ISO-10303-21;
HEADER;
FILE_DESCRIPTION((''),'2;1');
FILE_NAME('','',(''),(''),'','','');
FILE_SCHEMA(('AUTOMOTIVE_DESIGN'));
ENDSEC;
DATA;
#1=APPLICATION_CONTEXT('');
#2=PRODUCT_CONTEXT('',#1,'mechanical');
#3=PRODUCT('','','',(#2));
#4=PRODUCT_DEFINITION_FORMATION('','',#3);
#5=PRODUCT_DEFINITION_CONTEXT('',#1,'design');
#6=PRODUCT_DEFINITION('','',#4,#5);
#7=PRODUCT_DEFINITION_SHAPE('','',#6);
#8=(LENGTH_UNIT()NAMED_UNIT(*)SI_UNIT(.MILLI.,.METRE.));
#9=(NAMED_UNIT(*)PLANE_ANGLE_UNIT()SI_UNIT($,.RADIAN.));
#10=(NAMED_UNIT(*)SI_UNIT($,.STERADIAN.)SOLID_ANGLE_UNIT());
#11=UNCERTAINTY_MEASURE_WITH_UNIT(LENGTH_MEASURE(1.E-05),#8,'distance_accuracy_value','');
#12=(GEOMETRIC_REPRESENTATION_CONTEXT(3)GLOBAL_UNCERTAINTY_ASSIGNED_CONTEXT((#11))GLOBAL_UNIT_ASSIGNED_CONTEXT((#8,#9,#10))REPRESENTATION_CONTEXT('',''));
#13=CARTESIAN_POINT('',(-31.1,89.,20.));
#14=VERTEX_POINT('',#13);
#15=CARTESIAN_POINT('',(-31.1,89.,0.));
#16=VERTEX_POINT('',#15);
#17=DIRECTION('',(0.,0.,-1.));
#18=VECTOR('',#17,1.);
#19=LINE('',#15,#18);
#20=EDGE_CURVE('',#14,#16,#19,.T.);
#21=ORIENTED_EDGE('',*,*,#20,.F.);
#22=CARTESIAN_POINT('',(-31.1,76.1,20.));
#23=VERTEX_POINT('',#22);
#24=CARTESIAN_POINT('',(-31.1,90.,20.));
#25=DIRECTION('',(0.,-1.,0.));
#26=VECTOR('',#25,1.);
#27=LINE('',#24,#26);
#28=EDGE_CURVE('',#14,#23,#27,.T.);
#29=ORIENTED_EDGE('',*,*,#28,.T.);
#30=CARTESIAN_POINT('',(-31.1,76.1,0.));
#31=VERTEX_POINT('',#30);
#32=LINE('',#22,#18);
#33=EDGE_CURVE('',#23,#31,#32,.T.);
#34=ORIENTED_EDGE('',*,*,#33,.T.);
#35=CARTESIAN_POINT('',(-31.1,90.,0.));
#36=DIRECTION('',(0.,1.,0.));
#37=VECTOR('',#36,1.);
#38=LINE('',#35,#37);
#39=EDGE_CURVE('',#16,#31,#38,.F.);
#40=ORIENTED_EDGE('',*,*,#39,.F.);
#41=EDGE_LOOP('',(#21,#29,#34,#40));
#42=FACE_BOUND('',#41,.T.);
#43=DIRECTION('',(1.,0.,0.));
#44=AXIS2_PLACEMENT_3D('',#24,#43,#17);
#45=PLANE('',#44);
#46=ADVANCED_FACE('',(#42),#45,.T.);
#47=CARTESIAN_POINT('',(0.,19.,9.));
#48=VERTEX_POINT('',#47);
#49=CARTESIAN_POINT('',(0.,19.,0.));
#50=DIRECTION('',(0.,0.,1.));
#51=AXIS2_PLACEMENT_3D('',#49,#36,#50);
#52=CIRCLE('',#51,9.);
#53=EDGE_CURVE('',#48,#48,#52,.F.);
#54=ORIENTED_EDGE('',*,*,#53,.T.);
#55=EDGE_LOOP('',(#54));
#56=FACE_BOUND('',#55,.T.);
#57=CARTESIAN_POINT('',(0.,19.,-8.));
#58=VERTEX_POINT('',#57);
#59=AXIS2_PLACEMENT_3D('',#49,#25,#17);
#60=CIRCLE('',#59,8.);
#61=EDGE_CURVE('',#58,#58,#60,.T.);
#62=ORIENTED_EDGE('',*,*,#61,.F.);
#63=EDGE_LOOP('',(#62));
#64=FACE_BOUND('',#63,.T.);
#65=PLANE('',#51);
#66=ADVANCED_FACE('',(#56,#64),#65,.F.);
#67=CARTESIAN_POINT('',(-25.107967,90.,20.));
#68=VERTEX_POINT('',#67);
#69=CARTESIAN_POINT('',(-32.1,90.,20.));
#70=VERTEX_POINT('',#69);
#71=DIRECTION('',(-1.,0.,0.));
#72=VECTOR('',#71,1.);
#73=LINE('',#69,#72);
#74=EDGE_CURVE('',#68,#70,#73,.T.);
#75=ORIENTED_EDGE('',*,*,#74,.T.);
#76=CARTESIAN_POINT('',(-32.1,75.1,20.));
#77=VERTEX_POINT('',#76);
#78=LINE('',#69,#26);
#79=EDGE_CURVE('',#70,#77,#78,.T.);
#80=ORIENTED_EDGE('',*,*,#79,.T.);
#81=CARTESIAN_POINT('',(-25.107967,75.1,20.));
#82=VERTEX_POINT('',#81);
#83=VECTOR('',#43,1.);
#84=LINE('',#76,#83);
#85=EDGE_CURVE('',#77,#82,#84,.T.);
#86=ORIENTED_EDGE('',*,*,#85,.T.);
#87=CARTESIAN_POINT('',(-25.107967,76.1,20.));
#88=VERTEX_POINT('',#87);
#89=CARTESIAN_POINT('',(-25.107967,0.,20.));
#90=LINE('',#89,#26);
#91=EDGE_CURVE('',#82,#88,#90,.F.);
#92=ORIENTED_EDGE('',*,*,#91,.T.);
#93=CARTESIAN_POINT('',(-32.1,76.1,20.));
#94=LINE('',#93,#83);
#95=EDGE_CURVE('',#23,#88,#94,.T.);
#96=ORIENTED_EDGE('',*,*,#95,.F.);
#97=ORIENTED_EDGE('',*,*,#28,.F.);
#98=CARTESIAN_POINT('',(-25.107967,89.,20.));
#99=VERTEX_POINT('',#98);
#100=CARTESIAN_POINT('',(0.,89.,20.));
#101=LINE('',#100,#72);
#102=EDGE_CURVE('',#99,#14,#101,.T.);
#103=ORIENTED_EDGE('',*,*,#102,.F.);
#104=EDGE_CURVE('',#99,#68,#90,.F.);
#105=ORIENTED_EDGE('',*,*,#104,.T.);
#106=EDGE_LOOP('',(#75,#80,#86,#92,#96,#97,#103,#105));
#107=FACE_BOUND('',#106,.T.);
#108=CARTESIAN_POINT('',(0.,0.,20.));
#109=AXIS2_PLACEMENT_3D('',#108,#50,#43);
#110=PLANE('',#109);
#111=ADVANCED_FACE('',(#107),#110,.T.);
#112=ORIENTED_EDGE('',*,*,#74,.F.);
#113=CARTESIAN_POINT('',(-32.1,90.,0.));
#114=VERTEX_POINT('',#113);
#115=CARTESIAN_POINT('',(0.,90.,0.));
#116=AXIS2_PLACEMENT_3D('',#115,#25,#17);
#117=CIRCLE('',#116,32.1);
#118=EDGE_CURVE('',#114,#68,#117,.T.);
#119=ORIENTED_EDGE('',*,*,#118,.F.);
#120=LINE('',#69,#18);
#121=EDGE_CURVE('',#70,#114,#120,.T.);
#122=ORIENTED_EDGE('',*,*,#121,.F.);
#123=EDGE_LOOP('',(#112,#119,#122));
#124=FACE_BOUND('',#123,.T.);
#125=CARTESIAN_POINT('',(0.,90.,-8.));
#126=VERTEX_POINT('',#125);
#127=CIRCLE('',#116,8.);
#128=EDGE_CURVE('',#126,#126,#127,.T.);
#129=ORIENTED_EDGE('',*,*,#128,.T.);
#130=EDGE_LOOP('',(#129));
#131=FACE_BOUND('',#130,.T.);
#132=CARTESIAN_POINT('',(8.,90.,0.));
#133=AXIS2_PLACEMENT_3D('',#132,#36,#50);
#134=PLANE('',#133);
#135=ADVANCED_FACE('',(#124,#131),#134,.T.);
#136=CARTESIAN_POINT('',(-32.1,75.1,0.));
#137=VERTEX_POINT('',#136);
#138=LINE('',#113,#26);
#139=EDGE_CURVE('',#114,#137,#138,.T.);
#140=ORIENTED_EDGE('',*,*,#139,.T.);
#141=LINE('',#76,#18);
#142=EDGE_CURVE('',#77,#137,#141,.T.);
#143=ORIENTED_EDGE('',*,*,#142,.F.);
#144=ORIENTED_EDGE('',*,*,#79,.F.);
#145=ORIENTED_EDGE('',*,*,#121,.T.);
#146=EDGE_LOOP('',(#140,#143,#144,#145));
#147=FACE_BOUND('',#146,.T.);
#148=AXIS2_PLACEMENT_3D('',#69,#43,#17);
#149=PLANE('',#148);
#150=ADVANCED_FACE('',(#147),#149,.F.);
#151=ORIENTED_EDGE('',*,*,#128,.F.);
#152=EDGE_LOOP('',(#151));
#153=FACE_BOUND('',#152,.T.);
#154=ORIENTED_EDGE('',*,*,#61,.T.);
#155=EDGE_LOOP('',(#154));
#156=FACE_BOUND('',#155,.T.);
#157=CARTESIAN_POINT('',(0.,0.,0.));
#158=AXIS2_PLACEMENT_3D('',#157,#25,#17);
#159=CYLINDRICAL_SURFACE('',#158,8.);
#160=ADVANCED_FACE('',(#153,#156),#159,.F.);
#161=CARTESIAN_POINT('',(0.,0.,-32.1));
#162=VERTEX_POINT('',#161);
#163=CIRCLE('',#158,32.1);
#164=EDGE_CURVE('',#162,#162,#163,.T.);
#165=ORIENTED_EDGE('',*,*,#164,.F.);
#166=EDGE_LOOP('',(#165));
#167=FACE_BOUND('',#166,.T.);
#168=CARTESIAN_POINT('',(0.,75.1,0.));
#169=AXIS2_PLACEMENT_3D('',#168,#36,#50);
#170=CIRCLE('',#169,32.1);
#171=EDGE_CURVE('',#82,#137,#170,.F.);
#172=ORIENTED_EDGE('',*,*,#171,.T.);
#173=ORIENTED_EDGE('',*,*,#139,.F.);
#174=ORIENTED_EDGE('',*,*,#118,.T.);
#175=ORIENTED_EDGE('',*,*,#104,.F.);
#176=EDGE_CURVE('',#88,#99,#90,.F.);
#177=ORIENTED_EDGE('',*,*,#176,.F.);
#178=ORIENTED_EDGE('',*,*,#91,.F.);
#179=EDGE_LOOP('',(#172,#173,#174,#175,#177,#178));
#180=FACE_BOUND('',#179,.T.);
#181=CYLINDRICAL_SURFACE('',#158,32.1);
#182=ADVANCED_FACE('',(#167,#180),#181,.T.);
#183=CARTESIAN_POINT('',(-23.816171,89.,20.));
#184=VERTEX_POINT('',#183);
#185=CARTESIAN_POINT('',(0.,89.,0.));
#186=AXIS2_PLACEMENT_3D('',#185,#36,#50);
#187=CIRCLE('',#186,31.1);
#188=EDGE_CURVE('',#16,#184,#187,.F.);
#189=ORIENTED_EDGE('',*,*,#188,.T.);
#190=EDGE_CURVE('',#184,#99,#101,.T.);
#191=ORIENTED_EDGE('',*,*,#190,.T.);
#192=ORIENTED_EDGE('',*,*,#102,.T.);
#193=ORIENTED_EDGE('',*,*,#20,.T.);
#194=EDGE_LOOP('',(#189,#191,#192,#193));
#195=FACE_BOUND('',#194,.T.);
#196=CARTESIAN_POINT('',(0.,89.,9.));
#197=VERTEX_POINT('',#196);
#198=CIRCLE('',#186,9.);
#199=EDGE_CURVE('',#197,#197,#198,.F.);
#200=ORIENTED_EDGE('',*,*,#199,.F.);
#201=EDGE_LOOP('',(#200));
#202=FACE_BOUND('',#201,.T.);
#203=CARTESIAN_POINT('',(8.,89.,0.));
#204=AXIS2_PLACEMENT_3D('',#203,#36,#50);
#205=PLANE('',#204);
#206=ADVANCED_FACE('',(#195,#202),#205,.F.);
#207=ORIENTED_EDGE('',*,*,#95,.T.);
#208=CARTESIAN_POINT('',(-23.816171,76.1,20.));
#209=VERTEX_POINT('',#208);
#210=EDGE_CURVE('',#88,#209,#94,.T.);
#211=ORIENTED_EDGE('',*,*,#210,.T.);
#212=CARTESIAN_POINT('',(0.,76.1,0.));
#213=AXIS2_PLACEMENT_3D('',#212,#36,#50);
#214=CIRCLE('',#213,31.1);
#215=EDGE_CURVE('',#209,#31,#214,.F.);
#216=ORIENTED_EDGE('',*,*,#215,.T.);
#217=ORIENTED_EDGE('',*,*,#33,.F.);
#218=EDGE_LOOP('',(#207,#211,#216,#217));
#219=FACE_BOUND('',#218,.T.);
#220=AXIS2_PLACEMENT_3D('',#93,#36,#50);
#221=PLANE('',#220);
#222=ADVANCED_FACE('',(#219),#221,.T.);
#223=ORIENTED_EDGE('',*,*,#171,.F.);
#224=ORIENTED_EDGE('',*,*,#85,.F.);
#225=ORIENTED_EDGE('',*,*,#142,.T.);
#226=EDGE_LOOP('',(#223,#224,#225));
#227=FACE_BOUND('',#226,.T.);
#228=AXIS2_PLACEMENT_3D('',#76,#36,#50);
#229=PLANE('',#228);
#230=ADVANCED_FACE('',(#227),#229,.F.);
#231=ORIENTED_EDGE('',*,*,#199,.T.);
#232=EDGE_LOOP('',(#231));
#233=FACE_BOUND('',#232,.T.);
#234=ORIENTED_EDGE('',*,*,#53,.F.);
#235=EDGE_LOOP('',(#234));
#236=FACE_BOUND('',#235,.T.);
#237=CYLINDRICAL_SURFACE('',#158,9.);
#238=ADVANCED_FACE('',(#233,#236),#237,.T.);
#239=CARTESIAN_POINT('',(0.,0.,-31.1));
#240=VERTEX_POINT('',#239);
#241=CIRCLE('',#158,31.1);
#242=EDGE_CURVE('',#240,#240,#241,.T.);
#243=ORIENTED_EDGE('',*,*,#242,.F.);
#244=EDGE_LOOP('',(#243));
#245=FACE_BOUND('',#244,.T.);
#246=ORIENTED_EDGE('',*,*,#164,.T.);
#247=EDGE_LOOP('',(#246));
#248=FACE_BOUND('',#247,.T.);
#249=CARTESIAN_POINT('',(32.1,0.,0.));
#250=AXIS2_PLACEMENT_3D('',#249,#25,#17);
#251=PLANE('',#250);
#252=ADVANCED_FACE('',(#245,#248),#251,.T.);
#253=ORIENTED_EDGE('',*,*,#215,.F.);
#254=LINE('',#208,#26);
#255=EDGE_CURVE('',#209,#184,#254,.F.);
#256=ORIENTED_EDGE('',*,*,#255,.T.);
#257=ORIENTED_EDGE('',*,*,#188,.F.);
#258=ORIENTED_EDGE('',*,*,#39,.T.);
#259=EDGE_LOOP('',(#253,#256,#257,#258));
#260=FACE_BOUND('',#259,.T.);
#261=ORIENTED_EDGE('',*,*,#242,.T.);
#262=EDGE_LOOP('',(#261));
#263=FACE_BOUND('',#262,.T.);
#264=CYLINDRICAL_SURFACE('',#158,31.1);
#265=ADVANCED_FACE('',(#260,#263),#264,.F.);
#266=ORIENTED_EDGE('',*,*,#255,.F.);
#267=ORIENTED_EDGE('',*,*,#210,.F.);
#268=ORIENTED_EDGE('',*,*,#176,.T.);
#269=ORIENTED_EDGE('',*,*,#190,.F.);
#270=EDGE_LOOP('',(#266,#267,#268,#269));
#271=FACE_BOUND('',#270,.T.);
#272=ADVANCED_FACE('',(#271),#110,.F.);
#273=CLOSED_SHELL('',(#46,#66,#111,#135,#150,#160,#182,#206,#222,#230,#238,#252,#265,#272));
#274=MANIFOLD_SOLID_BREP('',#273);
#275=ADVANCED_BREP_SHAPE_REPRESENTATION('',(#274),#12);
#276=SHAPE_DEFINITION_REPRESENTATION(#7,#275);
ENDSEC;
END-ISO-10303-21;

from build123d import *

# Parameters (mm, degrees)
SKETCH_4_W          = 9
SKETCH_4_H          = 14.9
EXTRUDE_3_DEPTH     = 20
SHELL_2_OUTLINE_R   = 31.1
SHELL_2_OUTLINE_R_2 = 9
SHELL_2_DEPTH       = 89
SHELL_2_2_OUTLINE_R = 9
SHELL_2_2_DEPTH     = 19
SHELL_START         = 76.1
SHELL_2_3_DEPTH     = 12.9


# Read off the part's stored shape, not the designer's step: 쉘2
with BuildPart() as part:
    # 스케치3 → 회전1 (revolve)
    with BuildSketch(Plane.XY, mode=Mode.PRIVATE) as revolve_1_sk:
        Polygon((0, 19), (8, 19), (8, 90), (32.1, 90), (32.1, 0), (0, 0), align=None)
    revolve(revolve_1_sk.sketch.rotate(Axis((0, 0, 0), (0, 1, 0)), 90), axis=Axis((0, 0, 0), (0, 1, 0)))

    # 스케치4 → 보스-돌출3 (add)
    with BuildSketch(Plane.XY):
        with Locations((-27.6, 82.55)):
            Rectangle(SKETCH_4_W, SKETCH_4_H)
    extrude(amount=EXTRUDE_3_DEPTH)

    # 쉘2 outline → 쉘2 (cut)
    with BuildSketch(Plane(origin=(0, 0, 0), x_dir=(1, 0, 0), z_dir=(0, 1, 0))):
        Circle(SHELL_2_OUTLINE_R)
        Circle(SHELL_2_OUTLINE_R_2, mode=Mode.SUBTRACT)
    extrude(amount=SHELL_2_DEPTH, mode=Mode.SUBTRACT)

    # Shell 2 2 outline → Shell 2 2 (cut)
    with BuildSketch(Plane(origin=(0, 0, 0), x_dir=(1, 0, 0), z_dir=(0, 1, 0))):
        Circle(SHELL_2_2_OUTLINE_R)
    extrude(amount=SHELL_2_2_DEPTH, mode=Mode.SUBTRACT)

    # Shell 2 3 outline → Shell 2 3 (cut)
    with BuildSketch(Plane(origin=(0, 0, 0), x_dir=(1, 0, 0), z_dir=(0, 1, 0)).offset(SHELL_START)):
        with BuildLine():
            ThreePointArc((-23.816170977, -20), (-29.222362305, -10.642534534), (-31.1, 0))
            Line((-31.1, 0), (-31.1, -20))
            Line((-31.1, -20), (-23.816170977, -20))
        make_face()
    extrude(amount=SHELL_2_3_DEPTH, mode=Mode.SUBTRACT)


solid = part.part
